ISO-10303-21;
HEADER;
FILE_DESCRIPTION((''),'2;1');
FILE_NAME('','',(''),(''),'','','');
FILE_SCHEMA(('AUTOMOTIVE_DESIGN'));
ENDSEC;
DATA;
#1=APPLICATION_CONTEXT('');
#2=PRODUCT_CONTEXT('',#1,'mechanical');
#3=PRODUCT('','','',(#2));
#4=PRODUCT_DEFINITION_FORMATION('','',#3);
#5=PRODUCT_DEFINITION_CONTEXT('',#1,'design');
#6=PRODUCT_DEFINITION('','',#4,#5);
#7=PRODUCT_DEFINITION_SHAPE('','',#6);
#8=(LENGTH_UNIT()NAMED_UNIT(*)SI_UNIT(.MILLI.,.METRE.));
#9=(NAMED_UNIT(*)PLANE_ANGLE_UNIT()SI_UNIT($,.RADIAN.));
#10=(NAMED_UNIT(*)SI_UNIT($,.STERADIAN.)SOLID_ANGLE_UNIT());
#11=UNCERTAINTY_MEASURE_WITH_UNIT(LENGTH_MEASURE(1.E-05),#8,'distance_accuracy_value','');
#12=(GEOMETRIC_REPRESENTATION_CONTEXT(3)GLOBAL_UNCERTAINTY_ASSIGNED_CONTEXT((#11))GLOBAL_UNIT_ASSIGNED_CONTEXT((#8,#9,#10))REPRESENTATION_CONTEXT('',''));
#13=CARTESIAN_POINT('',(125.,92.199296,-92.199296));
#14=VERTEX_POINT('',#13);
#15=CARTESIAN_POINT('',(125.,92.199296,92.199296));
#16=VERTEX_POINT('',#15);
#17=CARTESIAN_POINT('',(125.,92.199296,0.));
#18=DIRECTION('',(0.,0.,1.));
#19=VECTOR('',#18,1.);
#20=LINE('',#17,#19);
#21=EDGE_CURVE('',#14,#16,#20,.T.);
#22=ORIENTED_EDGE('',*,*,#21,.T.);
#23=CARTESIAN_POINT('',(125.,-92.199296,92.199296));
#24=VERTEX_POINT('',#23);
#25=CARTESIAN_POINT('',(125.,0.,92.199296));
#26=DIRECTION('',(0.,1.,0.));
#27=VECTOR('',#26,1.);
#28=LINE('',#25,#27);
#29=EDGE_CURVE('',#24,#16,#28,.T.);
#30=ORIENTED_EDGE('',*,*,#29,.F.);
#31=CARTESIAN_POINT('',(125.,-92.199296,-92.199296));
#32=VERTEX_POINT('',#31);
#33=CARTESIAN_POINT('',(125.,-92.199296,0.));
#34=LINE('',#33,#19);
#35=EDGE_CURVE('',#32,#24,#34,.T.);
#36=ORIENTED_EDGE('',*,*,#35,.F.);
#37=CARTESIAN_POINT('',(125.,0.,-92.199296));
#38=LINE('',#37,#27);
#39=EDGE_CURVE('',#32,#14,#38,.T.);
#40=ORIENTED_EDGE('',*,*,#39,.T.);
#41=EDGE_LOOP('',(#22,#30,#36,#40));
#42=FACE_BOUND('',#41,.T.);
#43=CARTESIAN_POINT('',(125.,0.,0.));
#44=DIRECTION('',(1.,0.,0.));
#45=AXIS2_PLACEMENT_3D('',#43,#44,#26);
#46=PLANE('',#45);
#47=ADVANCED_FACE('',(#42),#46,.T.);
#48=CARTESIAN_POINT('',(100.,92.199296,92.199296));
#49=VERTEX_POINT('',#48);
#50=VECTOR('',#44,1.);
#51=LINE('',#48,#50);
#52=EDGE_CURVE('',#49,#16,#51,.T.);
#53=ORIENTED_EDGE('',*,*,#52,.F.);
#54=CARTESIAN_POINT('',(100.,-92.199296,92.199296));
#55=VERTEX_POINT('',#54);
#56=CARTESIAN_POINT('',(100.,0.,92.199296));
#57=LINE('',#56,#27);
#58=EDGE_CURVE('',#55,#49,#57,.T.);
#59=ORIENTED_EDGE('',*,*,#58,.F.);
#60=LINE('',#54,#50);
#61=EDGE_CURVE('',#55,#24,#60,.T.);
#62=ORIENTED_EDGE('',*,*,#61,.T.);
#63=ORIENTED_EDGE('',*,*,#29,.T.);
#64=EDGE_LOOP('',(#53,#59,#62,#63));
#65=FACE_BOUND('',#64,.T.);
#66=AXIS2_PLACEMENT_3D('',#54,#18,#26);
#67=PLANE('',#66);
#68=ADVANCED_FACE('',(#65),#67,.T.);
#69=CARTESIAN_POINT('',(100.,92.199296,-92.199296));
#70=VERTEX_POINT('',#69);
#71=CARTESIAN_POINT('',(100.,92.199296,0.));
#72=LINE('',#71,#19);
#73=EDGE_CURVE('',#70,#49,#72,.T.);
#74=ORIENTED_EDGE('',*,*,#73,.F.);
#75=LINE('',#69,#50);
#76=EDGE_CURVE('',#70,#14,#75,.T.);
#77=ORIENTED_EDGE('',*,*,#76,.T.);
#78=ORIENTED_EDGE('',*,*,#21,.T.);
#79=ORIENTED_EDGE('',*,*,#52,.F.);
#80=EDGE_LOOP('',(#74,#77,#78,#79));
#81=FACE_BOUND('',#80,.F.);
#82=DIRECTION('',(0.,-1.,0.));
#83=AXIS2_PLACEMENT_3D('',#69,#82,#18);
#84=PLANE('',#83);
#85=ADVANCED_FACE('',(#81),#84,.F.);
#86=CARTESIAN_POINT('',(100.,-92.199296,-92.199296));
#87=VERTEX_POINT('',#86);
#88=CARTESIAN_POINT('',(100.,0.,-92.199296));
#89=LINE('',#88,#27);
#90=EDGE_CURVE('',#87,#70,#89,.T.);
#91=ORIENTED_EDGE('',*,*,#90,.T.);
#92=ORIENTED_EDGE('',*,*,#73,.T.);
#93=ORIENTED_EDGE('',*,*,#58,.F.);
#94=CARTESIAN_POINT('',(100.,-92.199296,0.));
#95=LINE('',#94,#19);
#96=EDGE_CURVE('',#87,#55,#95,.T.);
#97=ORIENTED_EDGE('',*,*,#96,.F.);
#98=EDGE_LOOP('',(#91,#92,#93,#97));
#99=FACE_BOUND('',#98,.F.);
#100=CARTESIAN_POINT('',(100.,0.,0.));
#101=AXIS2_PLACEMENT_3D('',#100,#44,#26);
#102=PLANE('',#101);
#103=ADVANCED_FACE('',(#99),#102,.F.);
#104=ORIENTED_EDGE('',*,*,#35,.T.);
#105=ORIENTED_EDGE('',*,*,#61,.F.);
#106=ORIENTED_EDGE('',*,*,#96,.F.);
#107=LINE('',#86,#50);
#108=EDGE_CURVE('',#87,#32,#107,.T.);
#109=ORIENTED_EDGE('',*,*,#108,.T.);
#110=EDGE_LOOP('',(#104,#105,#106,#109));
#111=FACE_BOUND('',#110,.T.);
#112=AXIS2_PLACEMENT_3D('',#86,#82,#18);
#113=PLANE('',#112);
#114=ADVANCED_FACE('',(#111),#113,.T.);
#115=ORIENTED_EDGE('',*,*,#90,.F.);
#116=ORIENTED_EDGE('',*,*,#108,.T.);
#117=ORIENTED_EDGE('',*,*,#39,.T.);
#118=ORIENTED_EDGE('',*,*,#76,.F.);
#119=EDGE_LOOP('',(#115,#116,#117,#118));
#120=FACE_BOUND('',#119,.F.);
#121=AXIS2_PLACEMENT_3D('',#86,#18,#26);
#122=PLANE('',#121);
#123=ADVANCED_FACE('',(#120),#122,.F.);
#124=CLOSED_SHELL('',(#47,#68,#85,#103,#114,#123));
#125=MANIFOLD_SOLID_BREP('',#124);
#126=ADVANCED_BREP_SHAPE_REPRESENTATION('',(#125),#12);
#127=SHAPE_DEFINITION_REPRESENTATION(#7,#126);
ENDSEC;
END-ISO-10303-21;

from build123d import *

# Parameters (mm, degrees)
F2_W     = 184.3985915184
F2_H     = 184.3985915184
F9_DEPTH = 25


# Not quite as in the source:
# - the program builds the solid bodies; features that only make, move or delete a surface that nothing else refers to are left out


with BuildPart() as f9:
    # F2 (on offset) → F9 (new body)
    with BuildSketch(Plane.YZ.offset(100)):
        Rectangle(F2_W, F2_H)
    extrude(amount=F9_DEPTH)


solid = f9.part
